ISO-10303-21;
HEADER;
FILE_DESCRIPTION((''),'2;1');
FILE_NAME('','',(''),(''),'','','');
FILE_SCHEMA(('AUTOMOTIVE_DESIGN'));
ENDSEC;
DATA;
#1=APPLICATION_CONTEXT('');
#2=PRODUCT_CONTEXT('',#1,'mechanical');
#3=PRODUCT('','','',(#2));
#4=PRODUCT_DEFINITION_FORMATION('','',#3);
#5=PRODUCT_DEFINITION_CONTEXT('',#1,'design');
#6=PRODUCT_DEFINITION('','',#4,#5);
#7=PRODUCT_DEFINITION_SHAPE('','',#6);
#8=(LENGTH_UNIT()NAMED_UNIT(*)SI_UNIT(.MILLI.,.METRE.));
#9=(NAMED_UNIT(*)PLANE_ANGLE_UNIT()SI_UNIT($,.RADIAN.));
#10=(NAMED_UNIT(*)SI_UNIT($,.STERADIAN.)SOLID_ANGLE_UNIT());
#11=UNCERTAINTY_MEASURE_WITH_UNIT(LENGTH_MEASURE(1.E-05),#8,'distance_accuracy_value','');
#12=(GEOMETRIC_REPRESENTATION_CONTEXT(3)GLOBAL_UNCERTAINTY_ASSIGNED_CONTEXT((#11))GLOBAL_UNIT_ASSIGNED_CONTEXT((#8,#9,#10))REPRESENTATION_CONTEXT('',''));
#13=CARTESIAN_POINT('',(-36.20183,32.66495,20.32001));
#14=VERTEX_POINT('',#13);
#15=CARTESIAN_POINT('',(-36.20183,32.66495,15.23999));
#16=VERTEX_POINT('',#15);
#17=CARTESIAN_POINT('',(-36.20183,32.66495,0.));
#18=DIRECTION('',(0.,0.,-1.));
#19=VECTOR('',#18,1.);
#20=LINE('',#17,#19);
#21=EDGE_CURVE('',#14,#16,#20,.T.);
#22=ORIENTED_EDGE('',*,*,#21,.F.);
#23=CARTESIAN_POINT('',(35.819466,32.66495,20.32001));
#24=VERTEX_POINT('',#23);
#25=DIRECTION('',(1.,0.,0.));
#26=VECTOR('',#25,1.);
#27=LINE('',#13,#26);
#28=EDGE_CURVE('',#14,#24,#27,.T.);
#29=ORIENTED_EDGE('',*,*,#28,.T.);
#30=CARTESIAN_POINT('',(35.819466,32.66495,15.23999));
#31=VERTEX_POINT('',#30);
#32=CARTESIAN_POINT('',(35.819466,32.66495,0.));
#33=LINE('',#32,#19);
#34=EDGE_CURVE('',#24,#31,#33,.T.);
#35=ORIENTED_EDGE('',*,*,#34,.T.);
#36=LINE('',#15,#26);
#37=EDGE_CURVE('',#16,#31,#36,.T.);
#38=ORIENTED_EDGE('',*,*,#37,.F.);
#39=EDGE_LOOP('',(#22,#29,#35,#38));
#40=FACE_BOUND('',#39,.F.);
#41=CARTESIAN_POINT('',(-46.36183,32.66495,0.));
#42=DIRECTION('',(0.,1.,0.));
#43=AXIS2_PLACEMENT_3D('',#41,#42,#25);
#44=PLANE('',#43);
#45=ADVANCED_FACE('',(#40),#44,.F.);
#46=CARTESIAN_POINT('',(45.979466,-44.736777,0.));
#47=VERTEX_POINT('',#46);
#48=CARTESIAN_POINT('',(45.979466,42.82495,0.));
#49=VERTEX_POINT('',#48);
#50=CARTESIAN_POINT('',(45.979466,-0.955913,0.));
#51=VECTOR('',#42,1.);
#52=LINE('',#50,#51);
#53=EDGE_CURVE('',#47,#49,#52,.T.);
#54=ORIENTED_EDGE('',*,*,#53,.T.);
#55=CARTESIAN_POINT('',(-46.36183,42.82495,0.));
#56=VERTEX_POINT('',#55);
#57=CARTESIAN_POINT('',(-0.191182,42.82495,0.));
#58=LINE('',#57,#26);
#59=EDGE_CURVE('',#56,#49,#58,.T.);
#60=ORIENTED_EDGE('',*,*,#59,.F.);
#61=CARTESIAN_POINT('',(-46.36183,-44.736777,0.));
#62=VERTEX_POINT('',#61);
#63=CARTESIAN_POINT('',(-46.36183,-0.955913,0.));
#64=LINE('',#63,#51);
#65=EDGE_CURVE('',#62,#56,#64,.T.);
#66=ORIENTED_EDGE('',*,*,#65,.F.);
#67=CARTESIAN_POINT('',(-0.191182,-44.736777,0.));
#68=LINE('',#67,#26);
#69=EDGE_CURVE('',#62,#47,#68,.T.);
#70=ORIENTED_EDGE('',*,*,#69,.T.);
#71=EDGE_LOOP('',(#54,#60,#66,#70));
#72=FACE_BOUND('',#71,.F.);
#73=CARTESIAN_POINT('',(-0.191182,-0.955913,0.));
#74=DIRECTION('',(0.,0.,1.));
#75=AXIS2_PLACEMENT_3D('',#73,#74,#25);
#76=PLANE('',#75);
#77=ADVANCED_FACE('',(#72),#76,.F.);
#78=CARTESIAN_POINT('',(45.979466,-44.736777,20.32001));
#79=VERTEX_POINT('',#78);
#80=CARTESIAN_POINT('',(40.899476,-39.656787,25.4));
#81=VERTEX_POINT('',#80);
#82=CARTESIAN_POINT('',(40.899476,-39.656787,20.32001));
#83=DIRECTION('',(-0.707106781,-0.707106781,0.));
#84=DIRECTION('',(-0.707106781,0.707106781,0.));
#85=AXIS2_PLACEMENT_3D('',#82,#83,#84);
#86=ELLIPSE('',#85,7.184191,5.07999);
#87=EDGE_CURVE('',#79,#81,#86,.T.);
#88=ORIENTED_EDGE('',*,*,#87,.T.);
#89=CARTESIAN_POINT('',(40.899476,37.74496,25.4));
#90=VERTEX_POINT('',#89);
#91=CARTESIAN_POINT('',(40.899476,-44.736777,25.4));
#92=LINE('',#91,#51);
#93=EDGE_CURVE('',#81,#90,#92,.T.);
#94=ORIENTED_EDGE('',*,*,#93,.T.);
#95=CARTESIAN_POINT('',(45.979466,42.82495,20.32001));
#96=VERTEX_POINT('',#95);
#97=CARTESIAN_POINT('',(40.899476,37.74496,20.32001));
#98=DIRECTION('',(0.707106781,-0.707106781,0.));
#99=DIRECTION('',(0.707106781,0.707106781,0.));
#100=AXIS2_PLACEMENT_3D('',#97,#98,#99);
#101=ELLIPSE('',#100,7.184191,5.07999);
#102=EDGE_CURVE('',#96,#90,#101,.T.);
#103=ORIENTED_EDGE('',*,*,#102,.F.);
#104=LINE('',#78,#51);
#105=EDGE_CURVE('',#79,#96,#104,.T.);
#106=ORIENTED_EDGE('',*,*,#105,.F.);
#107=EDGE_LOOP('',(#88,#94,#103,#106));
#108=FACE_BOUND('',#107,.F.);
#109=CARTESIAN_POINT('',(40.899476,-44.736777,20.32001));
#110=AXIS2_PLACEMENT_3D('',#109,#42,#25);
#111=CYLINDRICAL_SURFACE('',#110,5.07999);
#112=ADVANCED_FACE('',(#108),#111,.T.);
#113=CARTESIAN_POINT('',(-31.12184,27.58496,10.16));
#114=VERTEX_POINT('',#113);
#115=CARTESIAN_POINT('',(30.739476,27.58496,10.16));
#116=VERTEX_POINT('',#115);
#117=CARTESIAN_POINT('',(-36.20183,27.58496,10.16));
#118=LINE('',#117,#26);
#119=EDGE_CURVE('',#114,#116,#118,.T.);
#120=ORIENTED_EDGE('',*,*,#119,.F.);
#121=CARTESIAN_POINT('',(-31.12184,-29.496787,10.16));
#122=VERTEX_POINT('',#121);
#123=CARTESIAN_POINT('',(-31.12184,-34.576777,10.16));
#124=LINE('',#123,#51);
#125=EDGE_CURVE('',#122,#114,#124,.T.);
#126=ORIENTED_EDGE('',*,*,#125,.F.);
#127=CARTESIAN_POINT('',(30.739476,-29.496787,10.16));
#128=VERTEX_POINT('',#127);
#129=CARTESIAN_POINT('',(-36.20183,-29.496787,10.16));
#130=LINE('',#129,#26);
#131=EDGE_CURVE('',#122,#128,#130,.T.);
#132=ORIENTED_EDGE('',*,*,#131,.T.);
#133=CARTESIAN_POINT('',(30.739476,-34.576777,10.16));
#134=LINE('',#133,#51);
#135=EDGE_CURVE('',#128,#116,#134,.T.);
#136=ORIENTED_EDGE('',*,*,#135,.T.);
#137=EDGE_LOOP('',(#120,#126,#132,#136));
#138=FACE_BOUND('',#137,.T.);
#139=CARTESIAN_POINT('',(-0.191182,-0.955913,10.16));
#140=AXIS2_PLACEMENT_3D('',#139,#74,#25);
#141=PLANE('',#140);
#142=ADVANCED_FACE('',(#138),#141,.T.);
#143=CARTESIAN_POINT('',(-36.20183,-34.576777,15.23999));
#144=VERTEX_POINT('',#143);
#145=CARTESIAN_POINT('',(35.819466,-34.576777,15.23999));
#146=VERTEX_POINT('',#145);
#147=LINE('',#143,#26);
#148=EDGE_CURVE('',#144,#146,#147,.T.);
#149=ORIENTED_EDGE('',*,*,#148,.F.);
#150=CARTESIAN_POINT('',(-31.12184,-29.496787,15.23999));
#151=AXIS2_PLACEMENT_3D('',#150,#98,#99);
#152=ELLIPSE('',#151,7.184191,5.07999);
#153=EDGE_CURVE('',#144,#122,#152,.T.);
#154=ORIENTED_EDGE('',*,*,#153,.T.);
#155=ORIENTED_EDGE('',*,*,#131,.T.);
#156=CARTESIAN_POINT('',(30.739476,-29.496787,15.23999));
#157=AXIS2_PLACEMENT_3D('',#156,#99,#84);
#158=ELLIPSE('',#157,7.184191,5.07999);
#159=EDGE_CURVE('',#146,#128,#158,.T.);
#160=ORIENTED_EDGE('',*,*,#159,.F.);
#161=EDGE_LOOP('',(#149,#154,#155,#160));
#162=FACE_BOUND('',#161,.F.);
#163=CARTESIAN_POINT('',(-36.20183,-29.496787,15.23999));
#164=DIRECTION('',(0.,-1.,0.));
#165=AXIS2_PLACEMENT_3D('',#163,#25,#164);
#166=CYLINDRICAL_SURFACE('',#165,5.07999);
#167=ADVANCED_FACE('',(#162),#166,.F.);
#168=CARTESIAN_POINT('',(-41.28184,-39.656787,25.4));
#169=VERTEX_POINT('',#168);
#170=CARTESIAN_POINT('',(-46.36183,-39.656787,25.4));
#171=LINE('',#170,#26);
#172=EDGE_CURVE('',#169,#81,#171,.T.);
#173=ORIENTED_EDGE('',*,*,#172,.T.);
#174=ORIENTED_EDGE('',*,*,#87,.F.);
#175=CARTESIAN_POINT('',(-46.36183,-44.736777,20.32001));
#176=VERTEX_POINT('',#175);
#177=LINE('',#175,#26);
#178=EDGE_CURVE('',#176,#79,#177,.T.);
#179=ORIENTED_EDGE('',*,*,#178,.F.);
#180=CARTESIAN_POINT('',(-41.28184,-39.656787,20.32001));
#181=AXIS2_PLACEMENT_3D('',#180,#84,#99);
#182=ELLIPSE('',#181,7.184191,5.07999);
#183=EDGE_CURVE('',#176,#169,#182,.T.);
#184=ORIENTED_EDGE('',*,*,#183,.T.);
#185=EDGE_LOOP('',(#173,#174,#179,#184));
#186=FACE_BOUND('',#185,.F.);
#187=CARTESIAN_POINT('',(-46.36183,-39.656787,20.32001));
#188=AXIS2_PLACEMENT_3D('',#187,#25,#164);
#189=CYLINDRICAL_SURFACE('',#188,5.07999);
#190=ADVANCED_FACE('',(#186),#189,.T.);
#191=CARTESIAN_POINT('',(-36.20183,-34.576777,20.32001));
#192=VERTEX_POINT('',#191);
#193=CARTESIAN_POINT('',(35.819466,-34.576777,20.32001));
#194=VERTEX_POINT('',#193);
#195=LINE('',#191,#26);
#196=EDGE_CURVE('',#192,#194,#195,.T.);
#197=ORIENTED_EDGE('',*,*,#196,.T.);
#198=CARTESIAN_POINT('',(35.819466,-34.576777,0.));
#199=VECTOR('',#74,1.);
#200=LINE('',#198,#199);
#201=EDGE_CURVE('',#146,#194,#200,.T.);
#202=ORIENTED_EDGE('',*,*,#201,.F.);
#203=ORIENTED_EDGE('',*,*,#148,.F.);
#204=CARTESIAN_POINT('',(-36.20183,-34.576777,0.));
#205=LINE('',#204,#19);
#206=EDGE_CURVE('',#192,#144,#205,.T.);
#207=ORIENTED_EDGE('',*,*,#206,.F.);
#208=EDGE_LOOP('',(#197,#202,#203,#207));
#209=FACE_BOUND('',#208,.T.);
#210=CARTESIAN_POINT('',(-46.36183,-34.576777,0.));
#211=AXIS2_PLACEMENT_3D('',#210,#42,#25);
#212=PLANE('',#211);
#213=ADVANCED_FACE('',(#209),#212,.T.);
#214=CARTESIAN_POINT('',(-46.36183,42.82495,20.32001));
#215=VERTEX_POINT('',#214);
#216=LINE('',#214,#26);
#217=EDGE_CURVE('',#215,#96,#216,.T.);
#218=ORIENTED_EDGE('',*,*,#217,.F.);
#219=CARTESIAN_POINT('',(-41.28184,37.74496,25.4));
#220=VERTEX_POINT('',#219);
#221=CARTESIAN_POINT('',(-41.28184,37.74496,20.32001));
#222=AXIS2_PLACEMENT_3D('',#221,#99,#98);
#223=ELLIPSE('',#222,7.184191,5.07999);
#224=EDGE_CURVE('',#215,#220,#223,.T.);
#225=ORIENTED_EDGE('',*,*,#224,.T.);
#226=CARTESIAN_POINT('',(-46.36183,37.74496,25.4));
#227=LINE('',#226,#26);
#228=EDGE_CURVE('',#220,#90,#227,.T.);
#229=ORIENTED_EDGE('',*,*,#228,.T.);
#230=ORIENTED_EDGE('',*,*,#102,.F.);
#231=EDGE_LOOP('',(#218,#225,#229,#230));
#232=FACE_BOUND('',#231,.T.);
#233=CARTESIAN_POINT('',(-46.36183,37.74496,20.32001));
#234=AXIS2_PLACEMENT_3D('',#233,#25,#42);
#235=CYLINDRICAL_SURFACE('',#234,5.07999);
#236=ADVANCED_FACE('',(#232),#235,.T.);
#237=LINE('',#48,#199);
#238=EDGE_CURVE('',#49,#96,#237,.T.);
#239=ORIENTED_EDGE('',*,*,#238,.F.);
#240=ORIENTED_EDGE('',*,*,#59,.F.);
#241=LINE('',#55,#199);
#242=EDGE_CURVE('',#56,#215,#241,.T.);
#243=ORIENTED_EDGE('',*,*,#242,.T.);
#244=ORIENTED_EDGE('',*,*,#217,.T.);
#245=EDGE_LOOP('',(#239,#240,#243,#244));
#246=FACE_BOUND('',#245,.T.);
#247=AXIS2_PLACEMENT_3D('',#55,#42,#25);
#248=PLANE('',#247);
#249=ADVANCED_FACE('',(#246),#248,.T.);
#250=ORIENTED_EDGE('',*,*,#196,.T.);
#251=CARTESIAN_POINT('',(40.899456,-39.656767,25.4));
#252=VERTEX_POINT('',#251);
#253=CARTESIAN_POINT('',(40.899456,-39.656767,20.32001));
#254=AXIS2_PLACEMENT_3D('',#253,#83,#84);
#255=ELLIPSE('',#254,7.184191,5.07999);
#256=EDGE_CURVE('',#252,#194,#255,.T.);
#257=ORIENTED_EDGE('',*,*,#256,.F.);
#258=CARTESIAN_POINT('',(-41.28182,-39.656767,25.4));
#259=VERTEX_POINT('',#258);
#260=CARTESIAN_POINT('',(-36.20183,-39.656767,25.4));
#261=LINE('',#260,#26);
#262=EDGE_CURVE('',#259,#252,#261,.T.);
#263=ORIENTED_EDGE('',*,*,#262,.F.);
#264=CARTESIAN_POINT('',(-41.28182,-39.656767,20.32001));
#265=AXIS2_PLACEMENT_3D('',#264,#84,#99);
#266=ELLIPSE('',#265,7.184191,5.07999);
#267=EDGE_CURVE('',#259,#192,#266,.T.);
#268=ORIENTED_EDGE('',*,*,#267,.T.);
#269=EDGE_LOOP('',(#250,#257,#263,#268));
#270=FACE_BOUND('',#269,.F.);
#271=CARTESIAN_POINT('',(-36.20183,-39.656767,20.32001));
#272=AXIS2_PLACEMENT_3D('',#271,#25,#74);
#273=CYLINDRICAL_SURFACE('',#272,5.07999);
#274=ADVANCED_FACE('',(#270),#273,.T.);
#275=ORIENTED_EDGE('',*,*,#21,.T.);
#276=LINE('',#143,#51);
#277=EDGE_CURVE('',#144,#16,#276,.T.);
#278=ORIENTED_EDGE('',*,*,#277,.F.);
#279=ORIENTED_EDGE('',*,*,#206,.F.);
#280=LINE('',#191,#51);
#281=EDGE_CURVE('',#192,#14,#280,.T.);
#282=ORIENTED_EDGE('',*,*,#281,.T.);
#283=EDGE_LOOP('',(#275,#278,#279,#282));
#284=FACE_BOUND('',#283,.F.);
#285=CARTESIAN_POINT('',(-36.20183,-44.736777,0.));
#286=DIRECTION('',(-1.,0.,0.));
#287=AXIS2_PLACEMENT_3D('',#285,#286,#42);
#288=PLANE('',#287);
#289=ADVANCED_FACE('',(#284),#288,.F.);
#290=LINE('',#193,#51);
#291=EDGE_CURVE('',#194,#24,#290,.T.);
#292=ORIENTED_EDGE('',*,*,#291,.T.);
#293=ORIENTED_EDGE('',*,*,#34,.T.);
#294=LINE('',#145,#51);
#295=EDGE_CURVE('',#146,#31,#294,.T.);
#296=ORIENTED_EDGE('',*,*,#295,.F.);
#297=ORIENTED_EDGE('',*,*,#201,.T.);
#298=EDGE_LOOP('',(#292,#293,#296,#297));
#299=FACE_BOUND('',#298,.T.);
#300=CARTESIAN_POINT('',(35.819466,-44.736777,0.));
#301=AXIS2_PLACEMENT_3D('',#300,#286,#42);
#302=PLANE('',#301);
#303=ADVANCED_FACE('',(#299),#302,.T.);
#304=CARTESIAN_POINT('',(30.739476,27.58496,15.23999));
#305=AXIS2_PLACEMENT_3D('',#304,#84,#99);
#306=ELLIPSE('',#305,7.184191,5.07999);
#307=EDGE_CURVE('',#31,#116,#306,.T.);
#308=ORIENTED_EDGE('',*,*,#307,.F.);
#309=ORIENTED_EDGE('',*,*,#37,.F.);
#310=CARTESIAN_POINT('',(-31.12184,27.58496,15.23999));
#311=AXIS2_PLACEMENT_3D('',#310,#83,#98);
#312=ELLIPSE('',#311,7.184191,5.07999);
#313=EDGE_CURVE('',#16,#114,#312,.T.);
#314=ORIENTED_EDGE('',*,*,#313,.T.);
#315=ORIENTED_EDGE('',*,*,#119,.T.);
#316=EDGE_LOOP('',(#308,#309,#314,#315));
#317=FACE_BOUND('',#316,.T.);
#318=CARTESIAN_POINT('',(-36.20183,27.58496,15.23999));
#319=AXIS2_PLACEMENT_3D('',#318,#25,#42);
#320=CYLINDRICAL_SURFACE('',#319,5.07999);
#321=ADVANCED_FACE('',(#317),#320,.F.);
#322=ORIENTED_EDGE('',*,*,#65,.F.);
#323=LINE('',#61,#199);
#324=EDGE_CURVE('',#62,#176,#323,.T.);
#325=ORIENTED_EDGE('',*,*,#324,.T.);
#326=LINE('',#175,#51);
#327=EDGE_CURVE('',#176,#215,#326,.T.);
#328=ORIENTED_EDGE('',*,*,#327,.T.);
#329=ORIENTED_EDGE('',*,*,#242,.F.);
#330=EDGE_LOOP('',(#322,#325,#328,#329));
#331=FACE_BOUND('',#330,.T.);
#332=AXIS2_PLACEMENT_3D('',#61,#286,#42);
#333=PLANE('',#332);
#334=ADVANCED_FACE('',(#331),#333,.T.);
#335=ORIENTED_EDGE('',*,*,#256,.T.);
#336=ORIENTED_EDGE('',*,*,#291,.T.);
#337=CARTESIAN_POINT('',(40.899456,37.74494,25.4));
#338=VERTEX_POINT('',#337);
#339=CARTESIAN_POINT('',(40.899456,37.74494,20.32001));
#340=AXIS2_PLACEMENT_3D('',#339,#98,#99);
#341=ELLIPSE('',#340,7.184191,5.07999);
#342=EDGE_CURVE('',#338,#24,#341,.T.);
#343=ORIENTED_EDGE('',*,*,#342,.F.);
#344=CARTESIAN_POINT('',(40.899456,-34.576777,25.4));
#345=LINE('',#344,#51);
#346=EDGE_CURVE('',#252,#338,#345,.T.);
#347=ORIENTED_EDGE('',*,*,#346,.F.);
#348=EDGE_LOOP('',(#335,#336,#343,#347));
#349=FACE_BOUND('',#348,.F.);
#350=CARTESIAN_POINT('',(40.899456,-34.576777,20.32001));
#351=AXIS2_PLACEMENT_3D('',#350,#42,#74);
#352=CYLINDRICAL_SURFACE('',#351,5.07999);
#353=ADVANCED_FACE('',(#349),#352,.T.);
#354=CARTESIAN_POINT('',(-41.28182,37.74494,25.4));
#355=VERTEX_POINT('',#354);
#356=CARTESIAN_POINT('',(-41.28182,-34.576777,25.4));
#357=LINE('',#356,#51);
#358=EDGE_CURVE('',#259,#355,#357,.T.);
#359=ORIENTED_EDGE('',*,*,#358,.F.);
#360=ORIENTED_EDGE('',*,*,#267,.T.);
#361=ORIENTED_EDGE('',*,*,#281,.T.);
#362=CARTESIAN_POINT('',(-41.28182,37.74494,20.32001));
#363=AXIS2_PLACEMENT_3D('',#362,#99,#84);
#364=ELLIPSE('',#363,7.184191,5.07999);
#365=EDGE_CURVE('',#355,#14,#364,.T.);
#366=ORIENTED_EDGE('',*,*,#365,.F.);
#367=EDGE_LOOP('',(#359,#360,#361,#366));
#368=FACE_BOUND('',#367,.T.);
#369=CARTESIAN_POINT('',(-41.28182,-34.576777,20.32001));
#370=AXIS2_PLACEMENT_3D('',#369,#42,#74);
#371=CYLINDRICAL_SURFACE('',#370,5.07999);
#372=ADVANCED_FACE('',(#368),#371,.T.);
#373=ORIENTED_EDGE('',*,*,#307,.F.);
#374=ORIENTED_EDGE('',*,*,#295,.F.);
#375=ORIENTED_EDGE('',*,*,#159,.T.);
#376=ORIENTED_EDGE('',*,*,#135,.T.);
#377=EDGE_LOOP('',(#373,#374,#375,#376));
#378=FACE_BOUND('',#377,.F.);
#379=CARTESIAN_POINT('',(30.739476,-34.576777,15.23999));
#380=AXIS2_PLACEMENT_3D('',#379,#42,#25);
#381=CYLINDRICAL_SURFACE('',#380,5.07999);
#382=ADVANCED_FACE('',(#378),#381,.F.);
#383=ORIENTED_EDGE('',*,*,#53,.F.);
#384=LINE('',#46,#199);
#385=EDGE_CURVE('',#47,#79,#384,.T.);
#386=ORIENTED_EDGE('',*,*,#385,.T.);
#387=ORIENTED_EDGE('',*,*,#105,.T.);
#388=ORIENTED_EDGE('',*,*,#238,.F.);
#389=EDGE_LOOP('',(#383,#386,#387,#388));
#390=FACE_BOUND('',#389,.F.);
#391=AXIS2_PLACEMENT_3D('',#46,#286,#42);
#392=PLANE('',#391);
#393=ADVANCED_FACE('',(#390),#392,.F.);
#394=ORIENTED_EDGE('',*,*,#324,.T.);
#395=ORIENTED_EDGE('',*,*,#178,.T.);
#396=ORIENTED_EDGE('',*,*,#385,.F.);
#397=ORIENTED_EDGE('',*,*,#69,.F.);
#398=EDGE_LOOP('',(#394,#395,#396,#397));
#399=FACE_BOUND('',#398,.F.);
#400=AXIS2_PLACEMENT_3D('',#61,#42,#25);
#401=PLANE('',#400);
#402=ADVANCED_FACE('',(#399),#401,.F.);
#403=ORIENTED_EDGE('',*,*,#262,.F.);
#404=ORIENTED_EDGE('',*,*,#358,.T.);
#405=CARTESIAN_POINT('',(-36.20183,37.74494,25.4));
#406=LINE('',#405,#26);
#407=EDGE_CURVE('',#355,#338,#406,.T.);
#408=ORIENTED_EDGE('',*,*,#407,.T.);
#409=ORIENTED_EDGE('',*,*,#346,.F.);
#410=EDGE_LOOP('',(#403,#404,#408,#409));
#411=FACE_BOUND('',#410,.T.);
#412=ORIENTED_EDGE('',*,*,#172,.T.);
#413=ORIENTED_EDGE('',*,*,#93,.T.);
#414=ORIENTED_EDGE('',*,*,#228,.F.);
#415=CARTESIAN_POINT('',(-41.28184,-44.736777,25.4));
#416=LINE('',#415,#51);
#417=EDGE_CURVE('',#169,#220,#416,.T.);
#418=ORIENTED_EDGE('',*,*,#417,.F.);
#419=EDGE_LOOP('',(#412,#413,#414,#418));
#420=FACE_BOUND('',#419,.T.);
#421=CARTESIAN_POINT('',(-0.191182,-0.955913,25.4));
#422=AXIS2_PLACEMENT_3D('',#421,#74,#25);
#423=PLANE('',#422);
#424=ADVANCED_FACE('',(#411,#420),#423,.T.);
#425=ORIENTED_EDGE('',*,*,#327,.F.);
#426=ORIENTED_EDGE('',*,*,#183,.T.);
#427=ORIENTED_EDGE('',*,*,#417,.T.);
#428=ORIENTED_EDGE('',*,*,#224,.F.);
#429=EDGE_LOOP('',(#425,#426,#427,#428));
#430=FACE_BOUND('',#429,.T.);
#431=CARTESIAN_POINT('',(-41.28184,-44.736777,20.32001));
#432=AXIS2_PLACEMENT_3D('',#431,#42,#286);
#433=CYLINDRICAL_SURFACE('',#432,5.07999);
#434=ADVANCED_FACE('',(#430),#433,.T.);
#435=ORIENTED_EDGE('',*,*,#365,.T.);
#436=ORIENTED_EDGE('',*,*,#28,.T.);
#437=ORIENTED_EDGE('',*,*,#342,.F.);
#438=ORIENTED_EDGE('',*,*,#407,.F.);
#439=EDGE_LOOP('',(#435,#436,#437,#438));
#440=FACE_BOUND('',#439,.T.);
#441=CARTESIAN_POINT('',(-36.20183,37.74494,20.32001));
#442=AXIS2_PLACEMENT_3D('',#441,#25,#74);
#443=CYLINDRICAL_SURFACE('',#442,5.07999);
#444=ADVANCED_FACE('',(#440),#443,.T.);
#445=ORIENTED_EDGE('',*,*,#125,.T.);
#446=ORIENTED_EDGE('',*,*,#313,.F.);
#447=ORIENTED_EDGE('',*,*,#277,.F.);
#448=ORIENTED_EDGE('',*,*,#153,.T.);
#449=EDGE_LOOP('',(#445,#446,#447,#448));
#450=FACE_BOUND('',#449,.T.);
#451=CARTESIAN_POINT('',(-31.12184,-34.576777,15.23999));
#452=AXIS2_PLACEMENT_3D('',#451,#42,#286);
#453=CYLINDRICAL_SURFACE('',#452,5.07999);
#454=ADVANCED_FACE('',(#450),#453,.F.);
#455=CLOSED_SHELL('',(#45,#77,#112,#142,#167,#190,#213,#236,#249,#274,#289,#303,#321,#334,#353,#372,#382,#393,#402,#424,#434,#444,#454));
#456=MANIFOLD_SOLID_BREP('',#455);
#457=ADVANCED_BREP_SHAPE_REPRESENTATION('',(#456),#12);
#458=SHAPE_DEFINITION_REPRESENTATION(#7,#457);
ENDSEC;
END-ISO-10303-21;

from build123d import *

# Parameters (mm, degrees)
F0_W     = 92.3412963748
F0_H     = 87.5617265701
F1_DEPTH = 25.4
F2_T     = -10.16
F3_R     = 5.07999


# Not quite as in the source:
# - a fillet or chamfer is up to 0.001 mm smaller than in the source, because OpenCascade refuses the exact size


with BuildPart() as f1:
    # F0 (on Top) → F1 (new body)
    with BuildSketch(Plane.XY):
        with Locations((-0.1911818981, -0.9559132159)):
            Rectangle(F0_W, F0_H)
    extrude(amount=F1_DEPTH)

    # F2
    f2_openings = [f1.faces().sort_by_distance(p)[0] for p in [
        (-0.191182, -0.955913, 25.4),
    ]]
    offset(amount=F2_T, openings=f2_openings)

    # F3 (radius 5.08 in the source; OpenCascade refuses exactly that, so slightly less here)
    f3_edges = [f1.edges().sort_by_distance(p)[0] for p in [
        (35.819466, -0.955913, 10.16),
        (-0.191182, 32.66495, 10.16),
        (-36.20183, -0.955913, 10.16),
        (-0.191182, -34.576777, 10.16),
        (45.979466, -0.955913, 25.4),
        (-0.191182, 42.82495, 25.4),
        (-46.36183, -0.955913, 25.4),
        (-0.191182, -44.736777, 25.4),
        (35.819466, -0.955913, 25.4),
        (-0.191182, -34.576777, 25.4),
        (-36.20183, -0.955913, 25.4),
        (-0.191182, 32.66495, 25.4),
    ]]
    fillet(f3_edges, radius=F3_R)


solid = f1.part
